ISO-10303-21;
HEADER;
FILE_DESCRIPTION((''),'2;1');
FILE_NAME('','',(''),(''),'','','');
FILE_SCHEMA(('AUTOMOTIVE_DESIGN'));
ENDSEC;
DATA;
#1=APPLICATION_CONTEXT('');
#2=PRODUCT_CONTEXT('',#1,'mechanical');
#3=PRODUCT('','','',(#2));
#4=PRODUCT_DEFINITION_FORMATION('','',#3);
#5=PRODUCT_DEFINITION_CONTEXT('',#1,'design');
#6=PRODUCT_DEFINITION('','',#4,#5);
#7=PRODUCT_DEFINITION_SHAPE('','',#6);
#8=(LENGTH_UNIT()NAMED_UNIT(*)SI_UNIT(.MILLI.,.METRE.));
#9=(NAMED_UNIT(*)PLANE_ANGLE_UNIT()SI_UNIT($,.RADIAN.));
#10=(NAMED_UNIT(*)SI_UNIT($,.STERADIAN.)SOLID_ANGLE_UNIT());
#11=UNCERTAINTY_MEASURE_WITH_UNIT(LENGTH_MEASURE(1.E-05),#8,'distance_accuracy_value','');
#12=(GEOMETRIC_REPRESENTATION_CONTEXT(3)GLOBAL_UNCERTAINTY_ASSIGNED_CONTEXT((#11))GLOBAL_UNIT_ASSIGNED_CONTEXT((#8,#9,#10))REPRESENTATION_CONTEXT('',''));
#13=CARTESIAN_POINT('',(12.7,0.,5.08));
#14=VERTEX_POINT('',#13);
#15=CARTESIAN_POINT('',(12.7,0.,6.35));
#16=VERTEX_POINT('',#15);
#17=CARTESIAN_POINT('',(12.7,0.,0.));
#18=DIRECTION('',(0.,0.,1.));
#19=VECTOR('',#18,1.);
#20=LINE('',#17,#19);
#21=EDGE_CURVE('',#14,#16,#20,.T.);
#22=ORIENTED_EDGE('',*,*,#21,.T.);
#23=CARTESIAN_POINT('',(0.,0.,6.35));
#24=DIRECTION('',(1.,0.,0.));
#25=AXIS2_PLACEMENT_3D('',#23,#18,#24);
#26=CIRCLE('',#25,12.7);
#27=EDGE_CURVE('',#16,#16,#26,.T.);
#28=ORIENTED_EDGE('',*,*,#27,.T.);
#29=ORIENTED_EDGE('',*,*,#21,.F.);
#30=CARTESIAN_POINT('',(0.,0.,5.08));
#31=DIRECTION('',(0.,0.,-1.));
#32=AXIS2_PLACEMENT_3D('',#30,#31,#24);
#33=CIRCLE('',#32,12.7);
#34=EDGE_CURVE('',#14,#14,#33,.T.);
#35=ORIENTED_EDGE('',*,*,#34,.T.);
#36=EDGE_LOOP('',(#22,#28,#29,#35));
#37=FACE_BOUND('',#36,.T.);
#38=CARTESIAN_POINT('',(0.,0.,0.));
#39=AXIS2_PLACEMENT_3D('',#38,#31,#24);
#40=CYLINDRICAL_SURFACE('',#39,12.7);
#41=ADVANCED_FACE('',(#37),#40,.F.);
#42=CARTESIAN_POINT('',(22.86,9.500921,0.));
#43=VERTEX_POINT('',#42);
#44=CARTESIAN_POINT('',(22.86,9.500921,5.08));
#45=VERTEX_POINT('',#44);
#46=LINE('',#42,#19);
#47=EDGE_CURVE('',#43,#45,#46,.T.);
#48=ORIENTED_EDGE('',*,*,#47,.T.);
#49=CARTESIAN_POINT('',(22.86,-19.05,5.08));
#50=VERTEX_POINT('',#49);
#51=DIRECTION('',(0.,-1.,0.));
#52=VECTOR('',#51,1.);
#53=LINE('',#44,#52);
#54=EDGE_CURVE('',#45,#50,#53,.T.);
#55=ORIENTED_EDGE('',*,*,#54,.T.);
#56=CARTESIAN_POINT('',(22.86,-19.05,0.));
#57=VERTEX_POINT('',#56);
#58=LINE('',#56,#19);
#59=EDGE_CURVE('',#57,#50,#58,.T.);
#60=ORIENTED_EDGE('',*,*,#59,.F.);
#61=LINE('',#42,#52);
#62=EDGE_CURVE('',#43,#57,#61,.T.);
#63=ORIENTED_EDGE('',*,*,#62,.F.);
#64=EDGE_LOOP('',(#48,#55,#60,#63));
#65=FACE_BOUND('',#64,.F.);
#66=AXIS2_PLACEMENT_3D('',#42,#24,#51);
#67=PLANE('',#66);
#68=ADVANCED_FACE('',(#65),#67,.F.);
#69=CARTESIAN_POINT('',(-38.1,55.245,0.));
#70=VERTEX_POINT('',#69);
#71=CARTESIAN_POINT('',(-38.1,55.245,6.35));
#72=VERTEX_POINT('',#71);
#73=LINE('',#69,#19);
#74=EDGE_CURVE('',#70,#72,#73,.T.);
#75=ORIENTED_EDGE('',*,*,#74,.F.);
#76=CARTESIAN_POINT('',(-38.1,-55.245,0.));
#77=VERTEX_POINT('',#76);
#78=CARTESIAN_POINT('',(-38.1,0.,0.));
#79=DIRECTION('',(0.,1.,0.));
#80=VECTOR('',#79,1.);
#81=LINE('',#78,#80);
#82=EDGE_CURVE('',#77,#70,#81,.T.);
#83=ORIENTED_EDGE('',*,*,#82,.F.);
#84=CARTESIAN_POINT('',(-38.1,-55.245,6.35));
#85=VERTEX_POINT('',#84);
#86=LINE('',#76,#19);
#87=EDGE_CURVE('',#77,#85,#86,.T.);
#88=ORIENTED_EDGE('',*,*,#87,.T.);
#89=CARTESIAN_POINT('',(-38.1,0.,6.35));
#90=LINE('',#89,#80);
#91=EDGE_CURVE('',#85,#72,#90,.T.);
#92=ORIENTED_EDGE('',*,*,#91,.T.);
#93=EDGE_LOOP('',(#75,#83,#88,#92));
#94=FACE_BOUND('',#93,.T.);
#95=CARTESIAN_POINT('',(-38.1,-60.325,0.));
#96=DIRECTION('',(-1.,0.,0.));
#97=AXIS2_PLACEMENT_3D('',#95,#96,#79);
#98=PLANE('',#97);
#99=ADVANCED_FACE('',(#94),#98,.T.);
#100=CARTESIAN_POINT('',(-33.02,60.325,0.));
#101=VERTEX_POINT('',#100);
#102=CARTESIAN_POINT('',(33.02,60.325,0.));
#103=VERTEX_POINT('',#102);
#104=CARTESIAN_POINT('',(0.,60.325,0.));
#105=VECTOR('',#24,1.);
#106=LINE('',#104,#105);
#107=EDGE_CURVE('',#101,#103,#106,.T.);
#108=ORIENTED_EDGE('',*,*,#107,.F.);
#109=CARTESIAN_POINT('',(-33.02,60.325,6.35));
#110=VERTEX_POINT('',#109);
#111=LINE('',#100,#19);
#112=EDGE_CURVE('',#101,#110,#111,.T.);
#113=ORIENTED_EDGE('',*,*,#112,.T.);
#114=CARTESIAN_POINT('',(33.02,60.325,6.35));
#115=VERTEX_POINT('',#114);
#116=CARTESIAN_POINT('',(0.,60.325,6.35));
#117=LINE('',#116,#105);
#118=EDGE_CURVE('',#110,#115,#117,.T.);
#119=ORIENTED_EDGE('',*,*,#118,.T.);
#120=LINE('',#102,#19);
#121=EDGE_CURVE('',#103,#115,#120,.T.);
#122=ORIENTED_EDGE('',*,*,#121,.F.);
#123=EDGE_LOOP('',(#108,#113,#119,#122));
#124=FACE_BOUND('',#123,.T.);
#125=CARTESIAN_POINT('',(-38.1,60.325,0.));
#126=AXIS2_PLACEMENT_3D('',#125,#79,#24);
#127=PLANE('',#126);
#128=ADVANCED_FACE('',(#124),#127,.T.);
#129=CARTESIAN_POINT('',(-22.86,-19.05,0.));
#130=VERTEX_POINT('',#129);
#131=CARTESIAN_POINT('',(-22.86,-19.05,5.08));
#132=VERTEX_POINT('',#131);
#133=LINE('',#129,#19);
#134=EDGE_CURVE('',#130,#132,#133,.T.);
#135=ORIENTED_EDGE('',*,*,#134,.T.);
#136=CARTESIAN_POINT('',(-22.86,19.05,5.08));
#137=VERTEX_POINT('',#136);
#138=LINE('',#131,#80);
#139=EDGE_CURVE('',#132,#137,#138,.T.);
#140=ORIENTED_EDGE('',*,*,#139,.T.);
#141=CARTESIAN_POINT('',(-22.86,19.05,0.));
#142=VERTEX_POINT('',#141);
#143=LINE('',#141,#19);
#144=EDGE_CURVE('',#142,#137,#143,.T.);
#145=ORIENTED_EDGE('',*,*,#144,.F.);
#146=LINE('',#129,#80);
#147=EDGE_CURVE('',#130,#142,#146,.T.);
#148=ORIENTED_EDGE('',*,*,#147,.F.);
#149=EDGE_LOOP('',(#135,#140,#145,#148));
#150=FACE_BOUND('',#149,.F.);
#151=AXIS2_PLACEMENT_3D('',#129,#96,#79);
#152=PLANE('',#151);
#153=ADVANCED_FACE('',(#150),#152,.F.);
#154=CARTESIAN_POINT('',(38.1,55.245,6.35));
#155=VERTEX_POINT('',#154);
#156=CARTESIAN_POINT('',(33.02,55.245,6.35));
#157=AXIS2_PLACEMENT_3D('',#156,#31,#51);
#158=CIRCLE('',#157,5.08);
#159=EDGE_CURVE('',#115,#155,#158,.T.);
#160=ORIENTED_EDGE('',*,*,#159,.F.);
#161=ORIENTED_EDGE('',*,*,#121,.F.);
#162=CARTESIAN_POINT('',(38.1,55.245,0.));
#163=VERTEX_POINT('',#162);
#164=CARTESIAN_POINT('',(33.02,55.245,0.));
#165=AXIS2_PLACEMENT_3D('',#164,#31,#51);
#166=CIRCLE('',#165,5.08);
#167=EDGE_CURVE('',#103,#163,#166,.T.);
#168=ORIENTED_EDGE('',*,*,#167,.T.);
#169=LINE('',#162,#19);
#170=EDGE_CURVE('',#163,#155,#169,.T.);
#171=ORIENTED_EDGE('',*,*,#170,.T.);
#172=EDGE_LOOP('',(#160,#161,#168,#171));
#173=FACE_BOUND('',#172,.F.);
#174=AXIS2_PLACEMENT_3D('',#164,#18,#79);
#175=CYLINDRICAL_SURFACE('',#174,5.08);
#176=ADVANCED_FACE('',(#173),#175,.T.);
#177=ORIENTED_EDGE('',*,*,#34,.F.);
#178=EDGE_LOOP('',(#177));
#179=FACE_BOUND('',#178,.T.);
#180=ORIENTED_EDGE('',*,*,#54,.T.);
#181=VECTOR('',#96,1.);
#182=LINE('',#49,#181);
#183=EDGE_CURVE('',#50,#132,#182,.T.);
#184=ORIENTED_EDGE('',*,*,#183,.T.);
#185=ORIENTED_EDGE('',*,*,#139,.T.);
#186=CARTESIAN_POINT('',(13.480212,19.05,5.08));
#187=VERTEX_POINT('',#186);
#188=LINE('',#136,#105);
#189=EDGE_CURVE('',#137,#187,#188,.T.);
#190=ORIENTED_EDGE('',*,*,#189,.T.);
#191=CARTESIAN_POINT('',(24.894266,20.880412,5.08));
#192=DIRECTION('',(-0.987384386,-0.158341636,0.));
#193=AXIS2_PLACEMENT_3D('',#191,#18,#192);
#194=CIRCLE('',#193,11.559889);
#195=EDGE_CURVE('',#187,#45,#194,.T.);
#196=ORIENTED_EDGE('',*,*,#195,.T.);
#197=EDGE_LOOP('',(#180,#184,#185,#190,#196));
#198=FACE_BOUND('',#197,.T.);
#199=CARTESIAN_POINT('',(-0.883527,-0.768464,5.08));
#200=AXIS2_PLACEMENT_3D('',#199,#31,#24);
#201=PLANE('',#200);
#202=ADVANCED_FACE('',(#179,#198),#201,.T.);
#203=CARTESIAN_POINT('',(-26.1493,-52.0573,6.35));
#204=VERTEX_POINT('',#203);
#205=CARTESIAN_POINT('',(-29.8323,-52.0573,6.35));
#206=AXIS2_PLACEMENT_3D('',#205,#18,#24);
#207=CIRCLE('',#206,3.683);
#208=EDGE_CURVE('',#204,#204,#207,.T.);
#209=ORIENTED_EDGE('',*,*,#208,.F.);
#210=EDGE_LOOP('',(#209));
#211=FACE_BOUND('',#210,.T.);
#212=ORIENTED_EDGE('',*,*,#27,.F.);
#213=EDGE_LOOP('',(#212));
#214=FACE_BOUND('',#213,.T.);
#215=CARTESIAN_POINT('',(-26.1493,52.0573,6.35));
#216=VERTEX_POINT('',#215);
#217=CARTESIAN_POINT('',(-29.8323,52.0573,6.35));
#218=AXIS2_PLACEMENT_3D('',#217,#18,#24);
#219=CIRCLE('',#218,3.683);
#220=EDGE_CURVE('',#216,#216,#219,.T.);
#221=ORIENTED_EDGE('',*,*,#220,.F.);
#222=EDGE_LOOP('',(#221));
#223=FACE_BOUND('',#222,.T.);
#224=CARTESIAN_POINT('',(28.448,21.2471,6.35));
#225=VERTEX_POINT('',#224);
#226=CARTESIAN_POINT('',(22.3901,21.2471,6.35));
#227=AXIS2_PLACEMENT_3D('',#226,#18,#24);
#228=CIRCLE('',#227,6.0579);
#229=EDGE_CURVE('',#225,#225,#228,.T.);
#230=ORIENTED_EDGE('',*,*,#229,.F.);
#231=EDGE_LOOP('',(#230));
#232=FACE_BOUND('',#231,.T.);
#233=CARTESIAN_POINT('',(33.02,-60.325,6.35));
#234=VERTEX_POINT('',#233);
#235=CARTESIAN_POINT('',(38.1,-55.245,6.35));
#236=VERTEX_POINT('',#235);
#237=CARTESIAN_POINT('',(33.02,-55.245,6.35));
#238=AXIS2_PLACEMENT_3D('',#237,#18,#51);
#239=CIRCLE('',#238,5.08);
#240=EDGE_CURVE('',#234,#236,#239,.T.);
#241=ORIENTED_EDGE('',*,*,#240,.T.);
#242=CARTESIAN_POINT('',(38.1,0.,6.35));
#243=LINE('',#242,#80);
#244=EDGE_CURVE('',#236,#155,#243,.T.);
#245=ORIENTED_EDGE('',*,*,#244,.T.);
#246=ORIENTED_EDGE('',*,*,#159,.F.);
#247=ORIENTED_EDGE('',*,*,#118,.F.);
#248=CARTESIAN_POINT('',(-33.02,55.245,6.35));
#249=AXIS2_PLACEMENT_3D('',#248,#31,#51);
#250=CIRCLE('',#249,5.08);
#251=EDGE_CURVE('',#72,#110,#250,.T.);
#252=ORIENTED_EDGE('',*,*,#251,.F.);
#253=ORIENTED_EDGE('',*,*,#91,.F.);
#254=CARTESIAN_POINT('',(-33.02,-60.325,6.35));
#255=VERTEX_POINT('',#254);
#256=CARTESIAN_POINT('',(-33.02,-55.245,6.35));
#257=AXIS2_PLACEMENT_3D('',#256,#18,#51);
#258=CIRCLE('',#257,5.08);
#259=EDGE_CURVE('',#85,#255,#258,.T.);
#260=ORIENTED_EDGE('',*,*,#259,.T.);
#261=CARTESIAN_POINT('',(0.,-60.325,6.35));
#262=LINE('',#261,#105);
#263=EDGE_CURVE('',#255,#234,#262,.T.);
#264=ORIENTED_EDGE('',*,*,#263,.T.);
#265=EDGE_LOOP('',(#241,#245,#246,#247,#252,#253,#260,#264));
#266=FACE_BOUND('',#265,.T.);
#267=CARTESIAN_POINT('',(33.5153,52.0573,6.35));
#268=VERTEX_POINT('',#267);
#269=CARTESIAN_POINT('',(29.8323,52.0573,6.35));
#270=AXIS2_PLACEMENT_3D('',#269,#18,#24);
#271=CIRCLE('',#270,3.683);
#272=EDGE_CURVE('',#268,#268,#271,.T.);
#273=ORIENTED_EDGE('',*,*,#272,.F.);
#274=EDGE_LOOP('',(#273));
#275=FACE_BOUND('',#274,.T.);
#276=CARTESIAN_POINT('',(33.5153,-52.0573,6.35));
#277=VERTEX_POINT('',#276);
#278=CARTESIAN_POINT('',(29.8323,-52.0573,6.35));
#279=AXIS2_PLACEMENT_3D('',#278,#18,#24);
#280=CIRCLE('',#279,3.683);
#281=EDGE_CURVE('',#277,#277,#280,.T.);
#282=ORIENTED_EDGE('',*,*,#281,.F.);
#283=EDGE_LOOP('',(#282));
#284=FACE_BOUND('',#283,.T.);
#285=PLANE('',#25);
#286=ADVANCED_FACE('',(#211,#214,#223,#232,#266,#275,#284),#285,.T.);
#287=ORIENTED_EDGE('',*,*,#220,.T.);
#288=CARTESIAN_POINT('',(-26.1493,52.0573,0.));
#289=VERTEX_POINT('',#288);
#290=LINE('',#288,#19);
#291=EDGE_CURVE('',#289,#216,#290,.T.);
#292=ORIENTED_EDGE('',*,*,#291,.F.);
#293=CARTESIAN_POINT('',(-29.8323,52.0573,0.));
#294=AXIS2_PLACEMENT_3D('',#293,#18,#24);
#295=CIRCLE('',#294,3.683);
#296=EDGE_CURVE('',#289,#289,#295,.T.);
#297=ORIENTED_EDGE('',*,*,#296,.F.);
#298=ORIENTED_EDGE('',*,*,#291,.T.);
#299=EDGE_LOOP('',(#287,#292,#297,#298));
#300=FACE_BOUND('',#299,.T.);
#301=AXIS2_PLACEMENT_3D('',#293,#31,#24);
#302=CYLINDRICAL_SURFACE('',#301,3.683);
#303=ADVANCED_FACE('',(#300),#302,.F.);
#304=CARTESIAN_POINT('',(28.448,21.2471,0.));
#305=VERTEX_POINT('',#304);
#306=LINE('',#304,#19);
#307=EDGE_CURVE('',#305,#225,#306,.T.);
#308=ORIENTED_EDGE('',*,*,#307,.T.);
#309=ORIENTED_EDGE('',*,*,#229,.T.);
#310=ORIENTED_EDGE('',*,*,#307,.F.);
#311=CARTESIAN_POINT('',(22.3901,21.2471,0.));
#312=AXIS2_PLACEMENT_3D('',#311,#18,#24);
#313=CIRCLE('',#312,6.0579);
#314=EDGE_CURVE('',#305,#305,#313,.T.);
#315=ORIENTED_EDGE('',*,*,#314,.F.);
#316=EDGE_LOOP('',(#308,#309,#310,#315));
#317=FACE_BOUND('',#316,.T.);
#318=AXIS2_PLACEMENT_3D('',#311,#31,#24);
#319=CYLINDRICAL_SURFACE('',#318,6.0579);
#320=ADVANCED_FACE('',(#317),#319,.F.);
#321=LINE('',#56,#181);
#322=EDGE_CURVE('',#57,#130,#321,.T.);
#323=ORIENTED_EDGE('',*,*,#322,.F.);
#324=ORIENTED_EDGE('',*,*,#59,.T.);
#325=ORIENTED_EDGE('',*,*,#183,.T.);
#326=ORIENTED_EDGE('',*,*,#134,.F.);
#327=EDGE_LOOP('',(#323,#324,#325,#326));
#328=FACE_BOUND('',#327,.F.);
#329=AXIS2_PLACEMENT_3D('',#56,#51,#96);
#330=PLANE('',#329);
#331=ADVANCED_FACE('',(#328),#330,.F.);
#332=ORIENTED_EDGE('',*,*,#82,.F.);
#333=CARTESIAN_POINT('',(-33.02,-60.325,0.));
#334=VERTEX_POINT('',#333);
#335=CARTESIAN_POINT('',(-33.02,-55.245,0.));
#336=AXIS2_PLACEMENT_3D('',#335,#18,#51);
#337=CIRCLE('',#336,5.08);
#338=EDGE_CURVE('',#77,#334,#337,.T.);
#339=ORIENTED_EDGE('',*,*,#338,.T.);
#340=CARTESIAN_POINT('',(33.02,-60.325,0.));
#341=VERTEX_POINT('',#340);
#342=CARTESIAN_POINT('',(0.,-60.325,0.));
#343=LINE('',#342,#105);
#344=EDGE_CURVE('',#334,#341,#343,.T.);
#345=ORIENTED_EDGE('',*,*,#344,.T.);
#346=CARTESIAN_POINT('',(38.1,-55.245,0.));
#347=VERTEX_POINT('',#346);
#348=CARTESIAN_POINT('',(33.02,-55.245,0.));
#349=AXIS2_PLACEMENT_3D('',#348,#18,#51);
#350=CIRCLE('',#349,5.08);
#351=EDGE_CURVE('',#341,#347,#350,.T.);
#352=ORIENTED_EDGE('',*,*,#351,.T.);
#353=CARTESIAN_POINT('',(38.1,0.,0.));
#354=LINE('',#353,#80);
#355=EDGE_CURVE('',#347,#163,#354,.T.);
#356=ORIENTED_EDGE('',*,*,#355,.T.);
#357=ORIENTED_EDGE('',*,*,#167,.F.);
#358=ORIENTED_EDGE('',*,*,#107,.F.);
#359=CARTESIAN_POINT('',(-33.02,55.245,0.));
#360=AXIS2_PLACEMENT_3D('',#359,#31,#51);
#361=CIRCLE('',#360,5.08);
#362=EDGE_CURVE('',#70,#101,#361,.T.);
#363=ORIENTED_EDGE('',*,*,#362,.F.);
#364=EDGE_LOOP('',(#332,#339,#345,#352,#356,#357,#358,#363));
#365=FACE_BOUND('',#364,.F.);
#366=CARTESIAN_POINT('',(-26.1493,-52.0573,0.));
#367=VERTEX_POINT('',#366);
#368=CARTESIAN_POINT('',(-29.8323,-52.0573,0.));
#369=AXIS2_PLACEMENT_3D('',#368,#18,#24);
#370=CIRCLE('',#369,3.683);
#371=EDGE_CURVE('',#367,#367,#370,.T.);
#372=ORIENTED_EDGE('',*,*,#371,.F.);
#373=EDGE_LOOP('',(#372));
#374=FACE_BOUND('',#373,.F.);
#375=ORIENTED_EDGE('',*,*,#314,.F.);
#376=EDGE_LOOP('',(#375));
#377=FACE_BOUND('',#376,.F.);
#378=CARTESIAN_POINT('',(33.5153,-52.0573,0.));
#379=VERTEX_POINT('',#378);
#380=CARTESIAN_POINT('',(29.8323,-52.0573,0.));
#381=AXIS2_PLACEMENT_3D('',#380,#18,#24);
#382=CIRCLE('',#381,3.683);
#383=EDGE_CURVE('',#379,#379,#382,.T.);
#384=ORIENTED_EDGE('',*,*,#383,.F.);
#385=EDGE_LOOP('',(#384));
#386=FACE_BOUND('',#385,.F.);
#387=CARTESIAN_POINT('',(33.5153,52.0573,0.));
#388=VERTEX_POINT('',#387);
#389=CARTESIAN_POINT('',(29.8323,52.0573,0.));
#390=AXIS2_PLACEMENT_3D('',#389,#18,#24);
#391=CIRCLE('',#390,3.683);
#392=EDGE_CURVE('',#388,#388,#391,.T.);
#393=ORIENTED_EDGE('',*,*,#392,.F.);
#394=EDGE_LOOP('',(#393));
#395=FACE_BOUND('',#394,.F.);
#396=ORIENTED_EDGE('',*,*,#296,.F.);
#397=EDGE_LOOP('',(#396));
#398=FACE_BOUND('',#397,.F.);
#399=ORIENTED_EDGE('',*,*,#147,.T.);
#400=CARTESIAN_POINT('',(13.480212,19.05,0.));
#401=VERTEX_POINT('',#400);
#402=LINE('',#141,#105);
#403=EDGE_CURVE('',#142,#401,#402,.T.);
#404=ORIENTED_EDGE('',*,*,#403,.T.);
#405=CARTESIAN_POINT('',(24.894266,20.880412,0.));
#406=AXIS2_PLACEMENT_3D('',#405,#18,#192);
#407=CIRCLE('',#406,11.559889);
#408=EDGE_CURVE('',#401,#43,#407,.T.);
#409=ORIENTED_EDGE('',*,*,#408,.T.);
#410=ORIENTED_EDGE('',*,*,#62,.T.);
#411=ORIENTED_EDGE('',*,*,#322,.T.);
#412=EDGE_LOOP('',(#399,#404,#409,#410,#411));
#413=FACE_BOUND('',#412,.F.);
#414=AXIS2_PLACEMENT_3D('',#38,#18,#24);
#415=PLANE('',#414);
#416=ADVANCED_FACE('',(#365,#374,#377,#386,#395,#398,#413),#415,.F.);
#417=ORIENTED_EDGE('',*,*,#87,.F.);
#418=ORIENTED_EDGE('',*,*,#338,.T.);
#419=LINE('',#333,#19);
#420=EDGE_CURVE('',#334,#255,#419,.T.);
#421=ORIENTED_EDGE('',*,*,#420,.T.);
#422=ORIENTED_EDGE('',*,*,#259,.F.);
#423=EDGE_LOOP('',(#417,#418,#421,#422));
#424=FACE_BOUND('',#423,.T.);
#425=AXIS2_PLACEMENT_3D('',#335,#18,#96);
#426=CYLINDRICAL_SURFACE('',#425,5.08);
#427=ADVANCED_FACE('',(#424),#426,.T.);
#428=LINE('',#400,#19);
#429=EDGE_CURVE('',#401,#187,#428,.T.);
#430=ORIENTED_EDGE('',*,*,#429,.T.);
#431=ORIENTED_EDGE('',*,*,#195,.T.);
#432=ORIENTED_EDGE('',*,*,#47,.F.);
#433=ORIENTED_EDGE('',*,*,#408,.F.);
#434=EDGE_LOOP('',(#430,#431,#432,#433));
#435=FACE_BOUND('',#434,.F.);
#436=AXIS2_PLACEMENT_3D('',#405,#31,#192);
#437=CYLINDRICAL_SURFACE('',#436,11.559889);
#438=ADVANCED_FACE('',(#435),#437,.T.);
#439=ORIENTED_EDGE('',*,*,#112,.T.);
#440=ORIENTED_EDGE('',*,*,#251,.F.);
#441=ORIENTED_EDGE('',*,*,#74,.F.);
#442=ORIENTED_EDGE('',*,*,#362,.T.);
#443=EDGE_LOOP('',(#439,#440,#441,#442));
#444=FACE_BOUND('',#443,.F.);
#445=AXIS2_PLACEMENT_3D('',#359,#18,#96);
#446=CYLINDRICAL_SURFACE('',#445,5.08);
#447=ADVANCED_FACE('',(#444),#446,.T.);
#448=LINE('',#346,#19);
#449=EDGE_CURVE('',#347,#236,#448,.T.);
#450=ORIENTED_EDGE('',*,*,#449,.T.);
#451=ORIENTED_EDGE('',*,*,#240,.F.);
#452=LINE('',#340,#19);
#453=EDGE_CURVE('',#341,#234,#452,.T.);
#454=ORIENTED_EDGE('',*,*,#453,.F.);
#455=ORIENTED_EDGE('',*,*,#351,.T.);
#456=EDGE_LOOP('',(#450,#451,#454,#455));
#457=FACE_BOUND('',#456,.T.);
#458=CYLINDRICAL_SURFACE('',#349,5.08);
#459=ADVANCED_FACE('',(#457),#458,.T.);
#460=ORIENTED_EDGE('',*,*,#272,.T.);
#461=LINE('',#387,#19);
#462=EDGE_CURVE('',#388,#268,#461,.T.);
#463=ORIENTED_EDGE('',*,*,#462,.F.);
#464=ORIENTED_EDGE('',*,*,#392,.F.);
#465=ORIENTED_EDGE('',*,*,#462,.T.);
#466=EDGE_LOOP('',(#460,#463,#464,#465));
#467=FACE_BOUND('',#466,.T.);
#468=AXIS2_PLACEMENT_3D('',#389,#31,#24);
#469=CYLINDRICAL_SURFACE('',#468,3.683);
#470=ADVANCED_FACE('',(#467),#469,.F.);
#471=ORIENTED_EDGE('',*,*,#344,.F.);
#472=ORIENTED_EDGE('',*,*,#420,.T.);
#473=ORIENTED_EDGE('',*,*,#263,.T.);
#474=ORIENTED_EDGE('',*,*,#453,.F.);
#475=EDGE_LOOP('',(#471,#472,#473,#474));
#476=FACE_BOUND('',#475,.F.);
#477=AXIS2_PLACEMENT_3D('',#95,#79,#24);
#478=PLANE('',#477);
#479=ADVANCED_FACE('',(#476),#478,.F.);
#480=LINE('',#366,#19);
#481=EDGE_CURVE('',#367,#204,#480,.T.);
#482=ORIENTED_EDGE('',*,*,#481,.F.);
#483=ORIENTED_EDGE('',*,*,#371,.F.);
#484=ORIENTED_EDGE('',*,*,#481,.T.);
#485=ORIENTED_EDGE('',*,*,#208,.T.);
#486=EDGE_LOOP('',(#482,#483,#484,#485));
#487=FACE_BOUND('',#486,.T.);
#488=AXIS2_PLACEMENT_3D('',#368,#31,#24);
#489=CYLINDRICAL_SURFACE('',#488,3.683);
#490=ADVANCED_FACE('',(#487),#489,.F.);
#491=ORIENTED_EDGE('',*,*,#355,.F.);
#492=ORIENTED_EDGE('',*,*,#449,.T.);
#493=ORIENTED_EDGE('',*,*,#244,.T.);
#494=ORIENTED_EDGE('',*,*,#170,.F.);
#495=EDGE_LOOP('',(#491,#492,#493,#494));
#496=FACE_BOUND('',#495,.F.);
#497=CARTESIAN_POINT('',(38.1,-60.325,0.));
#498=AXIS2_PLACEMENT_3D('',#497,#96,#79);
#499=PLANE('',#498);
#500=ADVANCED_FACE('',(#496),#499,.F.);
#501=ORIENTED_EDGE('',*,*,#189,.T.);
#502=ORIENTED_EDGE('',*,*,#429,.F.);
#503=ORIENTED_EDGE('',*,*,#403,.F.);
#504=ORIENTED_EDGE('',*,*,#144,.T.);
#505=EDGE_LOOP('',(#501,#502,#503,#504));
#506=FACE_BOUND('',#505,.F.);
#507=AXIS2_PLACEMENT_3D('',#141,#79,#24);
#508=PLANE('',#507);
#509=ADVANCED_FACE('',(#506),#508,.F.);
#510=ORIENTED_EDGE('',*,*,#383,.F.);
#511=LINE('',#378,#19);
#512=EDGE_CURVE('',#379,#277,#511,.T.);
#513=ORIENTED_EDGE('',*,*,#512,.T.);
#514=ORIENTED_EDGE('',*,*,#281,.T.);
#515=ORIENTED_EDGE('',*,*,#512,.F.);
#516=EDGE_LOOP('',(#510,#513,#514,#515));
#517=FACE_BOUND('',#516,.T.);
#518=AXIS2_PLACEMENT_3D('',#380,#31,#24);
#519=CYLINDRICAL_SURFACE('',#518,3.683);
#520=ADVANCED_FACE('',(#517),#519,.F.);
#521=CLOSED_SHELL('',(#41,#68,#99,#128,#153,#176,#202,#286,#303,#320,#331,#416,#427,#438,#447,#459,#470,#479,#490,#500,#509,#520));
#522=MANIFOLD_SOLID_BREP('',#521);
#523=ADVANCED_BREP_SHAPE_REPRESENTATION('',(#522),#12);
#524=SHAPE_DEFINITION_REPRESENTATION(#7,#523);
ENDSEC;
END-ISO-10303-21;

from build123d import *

# Parameters (mm, degrees)
F0_W     = 76.2
F0_H     = 120.65
F0_R     = 3.683
F0_R_2   = 12.7
F0_R_3   = 6.0579
F1_DEPTH = 6.35
F2_R     = 5.08
F3_R     = 12.7
F4_DEPTH = 5.08


# Not quite as in the source:
# - a length typed as a fraction of an inch, garbled in the dataset ("3 / 203.2 mm" for 3/8 in), is restored


with BuildPart() as f1:
    # F0 (on Top) → F1 (new body)
    with BuildSketch(Plane.XY):
        Rectangle(F0_W, F0_H)
        with Locations((-29.8323, -52.0573)):
            Circle(F0_R, mode=Mode.SUBTRACT)
        with Locations((29.8323, -52.0573)):
            Circle(F0_R, mode=Mode.SUBTRACT)
        with Locations((-29.8323, 52.0573)):
            Circle(F0_R, mode=Mode.SUBTRACT)
        Circle(F0_R_2, mode=Mode.SUBTRACT)
        with Locations((22.3901, 21.2471)):
            Circle(F0_R_3, mode=Mode.SUBTRACT)
        with Locations((29.8323, 52.0573)):
            Circle(F0_R, mode=Mode.SUBTRACT)
    extrude(amount=F1_DEPTH)

    # F2
    f2_edges = [f1.edges().sort_by_distance(p)[0] for p in [
        (38.1, -60.325, 3.175),
        (-38.1, 60.325, 3.175),
        (38.1, 60.325, 3.175),
        (-38.1, -60.325, 3.175),
    ]]
    fillet(f2_edges, radius=F2_R)

    # F3 (on face) → F4 (cut)
    with BuildSketch(Plane(origin=(0, 0, 0), x_dir=(1, 0, 0), z_dir=(0, 0, -1))):
        with BuildLine():
            Line((22.86, 19.05), (14.4386043259, 19.05))
            Line((14.4386043259, 19.05), (-22.86, 19.05))
            Line((-22.86, 19.05), (-22.86, -19.05))
            Line((-22.86, -19.05), (13.4802116102, -19.05))
            ThreePointArc((13.4802116102, -19.05), (16.6474146742, -12.7797644882), (22.86, -9.5009213703))
            Line((22.86, -9.5009213703), (22.86, 19.05))
        make_face()
        Circle(F3_R, mode=Mode.SUBTRACT)
    extrude(amount=-F4_DEPTH, mode=Mode.SUBTRACT)


solid = f1.part
